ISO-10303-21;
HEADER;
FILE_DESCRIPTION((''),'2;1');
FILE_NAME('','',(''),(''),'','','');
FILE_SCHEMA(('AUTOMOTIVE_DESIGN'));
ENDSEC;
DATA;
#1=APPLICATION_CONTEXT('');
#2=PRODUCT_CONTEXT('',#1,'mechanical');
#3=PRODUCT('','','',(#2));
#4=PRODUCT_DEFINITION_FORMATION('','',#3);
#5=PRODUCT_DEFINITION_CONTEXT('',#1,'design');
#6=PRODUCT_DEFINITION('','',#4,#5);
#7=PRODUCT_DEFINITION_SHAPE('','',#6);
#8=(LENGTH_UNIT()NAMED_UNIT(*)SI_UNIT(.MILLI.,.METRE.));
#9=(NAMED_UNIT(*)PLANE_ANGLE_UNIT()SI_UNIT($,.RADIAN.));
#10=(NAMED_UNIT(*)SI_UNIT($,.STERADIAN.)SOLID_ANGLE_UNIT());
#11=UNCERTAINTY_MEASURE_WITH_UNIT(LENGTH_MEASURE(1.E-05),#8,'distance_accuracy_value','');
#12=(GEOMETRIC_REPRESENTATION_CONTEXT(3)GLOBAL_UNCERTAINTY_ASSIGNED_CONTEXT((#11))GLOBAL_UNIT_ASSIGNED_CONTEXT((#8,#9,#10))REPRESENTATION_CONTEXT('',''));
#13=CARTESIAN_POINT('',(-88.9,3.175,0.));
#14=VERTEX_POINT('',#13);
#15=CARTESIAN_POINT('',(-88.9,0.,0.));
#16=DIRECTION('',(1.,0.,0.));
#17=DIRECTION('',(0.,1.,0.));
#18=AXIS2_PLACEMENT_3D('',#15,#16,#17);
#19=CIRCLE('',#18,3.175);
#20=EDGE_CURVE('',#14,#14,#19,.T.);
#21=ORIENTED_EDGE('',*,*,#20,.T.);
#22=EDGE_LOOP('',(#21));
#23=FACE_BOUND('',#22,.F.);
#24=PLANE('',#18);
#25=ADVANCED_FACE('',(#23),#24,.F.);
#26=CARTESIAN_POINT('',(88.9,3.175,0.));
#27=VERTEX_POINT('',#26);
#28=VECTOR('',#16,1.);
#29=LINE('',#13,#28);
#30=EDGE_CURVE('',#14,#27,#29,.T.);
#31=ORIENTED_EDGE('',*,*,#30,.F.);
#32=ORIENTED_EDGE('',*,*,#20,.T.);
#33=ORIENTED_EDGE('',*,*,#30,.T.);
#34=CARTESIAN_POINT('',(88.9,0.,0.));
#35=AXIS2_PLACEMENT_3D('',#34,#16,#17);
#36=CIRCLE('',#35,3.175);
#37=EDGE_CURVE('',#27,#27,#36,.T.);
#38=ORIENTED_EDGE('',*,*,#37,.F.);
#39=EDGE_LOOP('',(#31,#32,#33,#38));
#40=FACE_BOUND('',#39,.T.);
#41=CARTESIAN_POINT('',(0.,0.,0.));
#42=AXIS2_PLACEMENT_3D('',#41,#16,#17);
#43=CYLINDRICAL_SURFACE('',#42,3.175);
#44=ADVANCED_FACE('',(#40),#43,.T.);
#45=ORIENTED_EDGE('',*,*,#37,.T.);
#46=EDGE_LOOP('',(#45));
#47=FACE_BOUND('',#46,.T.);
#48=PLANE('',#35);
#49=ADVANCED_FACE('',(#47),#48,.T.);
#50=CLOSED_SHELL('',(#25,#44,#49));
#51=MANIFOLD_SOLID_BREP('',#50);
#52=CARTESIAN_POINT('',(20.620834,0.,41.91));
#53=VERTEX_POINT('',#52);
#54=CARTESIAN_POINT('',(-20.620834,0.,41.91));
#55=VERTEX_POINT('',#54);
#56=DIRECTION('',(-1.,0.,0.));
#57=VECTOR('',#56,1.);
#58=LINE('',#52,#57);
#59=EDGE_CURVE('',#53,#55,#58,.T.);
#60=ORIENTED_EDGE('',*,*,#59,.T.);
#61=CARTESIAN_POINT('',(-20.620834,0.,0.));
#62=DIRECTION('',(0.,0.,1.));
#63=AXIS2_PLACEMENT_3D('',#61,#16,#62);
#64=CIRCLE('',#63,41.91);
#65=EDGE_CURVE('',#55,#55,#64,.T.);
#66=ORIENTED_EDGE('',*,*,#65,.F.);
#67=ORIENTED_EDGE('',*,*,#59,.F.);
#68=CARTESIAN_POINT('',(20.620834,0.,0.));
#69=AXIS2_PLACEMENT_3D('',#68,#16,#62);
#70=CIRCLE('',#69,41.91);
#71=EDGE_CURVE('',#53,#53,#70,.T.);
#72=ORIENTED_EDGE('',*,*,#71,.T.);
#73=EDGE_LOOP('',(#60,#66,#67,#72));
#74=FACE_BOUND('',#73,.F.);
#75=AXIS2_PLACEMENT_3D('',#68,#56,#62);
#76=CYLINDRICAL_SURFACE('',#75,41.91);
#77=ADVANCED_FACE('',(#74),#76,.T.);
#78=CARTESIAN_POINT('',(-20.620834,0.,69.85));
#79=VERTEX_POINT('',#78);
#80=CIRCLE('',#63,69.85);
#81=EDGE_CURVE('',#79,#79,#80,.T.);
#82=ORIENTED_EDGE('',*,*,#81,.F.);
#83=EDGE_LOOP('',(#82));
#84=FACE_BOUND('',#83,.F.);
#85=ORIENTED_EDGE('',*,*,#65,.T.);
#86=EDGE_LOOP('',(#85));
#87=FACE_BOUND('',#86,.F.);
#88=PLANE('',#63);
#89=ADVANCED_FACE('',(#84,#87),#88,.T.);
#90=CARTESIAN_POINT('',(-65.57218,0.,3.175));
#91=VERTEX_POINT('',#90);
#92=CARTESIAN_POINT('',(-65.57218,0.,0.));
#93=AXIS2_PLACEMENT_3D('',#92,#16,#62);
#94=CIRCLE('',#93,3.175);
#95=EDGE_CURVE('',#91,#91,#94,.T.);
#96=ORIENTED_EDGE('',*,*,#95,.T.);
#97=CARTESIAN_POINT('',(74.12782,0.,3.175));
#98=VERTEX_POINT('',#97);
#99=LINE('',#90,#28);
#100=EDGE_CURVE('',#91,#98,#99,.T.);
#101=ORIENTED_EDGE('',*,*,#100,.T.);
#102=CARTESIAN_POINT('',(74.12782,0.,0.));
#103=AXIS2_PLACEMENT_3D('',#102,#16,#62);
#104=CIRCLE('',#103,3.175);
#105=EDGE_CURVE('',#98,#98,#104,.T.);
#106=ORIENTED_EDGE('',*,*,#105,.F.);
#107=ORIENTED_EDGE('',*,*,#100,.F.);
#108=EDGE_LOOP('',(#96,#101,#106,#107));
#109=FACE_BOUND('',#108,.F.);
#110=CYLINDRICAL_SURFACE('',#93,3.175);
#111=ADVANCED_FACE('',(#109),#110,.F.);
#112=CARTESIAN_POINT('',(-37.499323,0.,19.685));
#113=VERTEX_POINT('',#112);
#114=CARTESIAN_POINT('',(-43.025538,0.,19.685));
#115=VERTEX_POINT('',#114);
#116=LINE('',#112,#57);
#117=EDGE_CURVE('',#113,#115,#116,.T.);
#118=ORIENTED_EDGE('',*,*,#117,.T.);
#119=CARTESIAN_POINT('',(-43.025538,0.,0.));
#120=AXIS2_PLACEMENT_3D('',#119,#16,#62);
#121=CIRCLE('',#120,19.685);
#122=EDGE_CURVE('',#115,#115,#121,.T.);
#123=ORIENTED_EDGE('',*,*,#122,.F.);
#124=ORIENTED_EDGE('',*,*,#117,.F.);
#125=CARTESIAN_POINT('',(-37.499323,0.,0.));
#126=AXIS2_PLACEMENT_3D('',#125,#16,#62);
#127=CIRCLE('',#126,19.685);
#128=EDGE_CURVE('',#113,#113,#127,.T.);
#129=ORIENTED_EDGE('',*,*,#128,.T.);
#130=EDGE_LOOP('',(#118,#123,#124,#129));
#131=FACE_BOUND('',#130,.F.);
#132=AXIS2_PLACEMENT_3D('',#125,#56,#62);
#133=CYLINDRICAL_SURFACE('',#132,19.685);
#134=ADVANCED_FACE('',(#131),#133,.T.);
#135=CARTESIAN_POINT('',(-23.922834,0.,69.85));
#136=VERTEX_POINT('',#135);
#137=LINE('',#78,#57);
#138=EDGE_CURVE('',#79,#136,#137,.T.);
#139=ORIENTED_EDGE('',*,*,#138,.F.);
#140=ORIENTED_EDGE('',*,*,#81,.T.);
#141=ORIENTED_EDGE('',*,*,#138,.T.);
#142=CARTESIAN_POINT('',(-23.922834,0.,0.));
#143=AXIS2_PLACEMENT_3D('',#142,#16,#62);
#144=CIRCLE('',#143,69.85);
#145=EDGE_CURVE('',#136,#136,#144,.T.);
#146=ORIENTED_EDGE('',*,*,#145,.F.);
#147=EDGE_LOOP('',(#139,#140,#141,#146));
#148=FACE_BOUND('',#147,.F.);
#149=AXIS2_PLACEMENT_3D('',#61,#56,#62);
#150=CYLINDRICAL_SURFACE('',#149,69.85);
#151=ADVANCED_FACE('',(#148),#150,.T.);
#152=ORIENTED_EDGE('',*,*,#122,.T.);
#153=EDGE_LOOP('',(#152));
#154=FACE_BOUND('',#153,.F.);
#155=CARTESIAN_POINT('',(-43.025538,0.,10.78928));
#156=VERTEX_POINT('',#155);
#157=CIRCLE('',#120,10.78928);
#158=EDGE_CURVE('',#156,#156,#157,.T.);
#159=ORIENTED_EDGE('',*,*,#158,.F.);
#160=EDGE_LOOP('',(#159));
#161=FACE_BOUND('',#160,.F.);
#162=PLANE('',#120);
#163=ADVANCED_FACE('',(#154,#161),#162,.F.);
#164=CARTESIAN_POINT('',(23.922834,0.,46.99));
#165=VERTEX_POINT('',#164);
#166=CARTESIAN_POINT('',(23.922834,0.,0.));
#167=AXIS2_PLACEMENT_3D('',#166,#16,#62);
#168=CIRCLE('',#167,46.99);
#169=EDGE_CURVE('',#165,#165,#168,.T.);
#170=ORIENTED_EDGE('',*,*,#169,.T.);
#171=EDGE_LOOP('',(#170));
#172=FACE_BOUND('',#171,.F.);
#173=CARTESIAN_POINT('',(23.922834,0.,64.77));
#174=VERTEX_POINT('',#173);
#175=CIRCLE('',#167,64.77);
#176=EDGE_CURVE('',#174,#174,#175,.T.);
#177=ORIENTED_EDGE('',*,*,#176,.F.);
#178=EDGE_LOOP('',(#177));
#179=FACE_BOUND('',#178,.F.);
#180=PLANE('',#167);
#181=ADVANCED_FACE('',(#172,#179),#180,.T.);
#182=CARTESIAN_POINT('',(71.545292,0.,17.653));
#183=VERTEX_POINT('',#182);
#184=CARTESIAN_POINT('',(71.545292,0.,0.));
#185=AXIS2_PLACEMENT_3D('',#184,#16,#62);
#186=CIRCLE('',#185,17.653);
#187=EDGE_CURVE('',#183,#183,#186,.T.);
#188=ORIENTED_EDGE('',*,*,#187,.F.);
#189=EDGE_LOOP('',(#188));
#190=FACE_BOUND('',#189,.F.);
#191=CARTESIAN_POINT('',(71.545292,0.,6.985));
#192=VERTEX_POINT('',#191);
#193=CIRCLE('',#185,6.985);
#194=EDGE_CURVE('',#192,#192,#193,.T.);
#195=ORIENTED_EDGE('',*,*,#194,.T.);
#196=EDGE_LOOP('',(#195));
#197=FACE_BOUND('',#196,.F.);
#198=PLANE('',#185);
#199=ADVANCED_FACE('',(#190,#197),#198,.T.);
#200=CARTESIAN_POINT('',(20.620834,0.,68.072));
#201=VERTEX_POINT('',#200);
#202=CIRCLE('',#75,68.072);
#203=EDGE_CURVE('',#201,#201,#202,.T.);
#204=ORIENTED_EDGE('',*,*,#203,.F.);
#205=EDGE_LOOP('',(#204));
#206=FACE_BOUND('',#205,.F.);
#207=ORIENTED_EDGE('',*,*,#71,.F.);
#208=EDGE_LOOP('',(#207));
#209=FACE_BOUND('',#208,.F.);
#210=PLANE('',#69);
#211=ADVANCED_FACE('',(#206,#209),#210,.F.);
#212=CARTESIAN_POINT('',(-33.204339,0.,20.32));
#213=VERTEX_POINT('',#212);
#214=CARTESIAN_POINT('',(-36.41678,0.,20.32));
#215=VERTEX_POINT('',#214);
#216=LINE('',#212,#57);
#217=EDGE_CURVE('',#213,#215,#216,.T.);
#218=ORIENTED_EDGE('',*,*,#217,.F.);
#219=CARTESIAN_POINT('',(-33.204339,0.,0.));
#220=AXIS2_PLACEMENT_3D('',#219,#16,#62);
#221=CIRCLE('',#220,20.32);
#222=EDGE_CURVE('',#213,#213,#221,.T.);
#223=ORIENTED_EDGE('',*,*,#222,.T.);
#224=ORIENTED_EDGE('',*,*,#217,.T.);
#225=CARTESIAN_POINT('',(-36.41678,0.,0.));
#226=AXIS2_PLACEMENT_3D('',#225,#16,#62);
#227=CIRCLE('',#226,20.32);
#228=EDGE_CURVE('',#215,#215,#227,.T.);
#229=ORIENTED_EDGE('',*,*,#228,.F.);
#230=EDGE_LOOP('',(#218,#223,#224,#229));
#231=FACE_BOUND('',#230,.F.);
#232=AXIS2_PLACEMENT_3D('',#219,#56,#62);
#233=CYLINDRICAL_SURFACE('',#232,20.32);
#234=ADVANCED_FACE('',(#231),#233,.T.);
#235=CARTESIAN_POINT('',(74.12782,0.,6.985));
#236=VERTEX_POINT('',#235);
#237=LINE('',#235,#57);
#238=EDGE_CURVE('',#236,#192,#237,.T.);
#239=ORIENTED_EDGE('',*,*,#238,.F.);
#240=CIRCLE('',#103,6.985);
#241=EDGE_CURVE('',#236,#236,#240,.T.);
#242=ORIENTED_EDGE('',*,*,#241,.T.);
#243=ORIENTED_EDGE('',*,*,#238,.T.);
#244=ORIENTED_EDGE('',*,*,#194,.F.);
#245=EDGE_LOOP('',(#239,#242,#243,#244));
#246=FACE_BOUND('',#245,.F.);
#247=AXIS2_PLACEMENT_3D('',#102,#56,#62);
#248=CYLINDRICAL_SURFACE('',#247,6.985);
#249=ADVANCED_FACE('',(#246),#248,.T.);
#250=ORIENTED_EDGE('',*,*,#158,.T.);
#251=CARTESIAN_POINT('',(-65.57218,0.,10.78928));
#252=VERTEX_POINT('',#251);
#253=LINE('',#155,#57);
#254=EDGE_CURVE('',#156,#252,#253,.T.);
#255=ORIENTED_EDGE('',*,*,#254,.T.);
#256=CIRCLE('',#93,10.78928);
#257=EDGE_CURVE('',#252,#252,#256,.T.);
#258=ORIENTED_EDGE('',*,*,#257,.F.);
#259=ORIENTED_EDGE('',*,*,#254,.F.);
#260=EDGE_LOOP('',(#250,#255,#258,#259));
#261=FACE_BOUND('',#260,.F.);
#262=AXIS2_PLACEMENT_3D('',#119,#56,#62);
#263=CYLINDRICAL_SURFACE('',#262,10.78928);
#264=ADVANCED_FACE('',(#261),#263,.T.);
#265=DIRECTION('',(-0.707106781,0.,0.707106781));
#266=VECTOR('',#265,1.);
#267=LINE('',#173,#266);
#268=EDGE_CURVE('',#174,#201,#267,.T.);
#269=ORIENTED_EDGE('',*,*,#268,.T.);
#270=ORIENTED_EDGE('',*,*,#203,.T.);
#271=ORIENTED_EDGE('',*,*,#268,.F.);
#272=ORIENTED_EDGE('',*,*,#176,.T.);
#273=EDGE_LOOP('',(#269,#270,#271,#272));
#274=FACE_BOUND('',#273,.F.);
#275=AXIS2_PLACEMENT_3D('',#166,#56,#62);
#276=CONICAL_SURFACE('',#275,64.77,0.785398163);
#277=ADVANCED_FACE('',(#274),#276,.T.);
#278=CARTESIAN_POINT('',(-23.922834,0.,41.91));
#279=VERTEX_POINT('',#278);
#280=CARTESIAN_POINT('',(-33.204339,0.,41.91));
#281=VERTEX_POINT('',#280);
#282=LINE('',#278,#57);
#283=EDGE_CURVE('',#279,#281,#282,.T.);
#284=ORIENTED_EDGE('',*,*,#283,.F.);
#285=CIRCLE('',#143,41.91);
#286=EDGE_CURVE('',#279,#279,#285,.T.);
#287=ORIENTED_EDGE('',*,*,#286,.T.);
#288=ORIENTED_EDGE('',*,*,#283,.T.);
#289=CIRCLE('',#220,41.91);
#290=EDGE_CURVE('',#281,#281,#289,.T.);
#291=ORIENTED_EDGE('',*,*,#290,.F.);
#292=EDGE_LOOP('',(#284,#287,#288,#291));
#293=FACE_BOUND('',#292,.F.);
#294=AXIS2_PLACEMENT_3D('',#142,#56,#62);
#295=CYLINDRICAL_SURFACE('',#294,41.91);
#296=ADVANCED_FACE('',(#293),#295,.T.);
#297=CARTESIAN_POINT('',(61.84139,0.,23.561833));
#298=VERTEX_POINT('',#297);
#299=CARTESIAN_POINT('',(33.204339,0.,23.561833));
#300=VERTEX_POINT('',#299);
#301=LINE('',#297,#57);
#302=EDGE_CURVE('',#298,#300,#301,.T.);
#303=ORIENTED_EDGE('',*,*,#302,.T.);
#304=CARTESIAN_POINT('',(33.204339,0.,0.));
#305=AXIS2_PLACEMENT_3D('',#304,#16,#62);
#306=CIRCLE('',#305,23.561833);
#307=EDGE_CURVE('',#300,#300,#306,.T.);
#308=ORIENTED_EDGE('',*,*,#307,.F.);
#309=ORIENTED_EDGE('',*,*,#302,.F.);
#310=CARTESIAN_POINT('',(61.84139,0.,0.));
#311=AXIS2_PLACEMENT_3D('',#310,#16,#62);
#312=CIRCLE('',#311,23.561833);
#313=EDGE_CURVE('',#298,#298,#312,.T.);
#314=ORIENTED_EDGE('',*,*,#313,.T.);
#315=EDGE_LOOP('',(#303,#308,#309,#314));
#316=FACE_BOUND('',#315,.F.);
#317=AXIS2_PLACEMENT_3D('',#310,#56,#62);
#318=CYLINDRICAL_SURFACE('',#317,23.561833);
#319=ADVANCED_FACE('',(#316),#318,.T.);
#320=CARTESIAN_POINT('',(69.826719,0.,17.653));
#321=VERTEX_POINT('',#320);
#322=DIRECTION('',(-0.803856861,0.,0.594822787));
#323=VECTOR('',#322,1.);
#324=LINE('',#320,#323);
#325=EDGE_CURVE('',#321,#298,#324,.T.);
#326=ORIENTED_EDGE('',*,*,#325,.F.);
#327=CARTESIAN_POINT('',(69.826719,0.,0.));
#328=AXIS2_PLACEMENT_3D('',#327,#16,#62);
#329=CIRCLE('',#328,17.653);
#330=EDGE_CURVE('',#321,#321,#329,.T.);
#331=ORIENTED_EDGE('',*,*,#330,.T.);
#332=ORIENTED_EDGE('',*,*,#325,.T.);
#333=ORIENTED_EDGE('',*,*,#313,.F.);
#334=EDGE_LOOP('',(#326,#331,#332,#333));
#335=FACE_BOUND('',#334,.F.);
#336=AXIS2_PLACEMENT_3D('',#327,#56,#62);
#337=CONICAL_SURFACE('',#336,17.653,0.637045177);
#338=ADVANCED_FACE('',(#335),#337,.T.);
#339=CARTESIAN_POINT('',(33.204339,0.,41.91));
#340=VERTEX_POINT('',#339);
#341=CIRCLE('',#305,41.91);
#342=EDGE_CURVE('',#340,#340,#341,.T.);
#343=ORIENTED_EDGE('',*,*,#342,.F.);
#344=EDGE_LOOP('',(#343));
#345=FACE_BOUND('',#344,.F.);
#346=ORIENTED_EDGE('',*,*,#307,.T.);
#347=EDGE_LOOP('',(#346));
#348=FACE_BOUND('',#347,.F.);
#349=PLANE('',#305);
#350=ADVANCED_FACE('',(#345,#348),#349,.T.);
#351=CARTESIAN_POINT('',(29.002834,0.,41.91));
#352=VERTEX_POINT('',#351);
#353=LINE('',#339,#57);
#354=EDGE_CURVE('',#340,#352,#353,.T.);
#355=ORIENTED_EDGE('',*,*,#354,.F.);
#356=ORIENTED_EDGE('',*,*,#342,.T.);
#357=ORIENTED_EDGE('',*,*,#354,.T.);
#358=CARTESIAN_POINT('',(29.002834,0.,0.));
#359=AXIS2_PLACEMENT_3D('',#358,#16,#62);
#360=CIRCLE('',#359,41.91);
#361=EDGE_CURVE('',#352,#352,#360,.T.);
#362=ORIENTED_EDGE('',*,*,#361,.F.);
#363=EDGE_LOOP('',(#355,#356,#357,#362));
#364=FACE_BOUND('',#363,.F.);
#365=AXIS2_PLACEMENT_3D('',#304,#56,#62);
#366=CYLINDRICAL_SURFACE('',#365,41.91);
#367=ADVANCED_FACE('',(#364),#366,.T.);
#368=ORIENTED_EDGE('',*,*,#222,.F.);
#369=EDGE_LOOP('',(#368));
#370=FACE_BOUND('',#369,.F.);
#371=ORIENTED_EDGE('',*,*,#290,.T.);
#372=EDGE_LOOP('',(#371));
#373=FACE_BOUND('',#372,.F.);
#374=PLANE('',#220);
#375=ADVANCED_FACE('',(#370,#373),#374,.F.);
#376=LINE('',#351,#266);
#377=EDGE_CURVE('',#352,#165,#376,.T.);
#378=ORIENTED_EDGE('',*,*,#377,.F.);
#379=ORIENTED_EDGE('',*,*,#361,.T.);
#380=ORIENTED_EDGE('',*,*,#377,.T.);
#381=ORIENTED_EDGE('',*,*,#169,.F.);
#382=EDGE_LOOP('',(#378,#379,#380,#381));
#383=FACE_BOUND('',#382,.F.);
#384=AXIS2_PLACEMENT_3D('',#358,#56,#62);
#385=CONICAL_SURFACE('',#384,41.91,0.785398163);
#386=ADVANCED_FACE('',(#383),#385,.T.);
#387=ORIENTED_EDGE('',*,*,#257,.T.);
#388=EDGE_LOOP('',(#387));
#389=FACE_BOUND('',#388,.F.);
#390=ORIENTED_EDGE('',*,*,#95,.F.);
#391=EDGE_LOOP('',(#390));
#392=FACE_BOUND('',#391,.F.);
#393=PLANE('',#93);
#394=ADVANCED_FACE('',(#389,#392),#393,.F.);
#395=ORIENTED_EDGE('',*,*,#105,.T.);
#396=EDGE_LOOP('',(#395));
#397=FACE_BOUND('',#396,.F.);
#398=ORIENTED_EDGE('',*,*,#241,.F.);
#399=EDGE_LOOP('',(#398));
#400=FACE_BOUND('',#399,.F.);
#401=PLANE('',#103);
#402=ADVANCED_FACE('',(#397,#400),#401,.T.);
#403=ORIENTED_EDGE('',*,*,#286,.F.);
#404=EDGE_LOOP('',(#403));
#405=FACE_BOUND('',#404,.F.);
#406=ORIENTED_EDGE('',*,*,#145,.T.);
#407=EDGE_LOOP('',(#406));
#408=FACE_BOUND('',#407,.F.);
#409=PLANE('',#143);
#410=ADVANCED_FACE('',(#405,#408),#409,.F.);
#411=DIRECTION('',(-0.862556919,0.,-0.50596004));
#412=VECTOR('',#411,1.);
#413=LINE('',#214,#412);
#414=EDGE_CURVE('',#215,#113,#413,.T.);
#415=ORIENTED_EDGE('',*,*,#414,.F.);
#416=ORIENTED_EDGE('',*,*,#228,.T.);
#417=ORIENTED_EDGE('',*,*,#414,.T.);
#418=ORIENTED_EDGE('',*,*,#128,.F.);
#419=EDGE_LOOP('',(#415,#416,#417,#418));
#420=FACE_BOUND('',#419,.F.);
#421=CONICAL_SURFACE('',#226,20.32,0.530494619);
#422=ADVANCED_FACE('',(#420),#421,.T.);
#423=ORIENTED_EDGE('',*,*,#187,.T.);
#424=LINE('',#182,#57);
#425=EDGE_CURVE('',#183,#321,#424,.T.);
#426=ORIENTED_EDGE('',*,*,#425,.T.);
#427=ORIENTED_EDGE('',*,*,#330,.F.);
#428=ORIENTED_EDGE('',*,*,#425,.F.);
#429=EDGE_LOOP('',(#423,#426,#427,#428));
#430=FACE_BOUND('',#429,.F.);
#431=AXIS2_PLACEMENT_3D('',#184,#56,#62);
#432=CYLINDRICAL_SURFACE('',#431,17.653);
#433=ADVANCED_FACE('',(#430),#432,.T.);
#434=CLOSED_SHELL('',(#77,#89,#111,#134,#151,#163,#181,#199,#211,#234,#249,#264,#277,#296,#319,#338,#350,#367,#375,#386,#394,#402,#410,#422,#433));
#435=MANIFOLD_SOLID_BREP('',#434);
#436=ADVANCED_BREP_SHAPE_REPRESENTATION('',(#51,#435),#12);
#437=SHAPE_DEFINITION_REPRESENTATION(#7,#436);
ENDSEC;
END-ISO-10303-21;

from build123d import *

# Parameters (mm, degrees)
F0_R     = 3.175
F1_DEPTH = 88.9


# Not quite as in the source:
# - a fillet or chamfer that OpenCascade refuses, or shapes differently, is made with other operations: its cross-section is extruded or revolved along the edge and cut away or added


with BuildPart() as f1:
    # F0 (on Right) → F1 (new body, symmetric)
    with BuildSketch(Plane.YZ):
        Circle(F0_R)
    extrude(amount=F1_DEPTH, both=True)


with BuildPart() as f3:
    # F2 (on Front) → F3 (revolve)
    with BuildSketch(Plane.XZ):
        Polygon((-65.5721798539, 10.789279826), (-65.5721798539, 3.175), (74.1278201461, 3.175), (74.1278201461, 6.985), (71.5452923138, 6.985), (71.5452923138, 17.653), (69.8267191484, 17.653), (61.8413901258, 23.561832648), (33.2043394446, 23.561832648), (33.2043394446, 41.91), (23.9228336141, 41.91), (23.9228336141, 69.85), (20.6208336141, 69.85), (20.6208336141, 41.91), (-20.6208336141, 41.91), (-20.6208336141, 69.85), (-23.9228336141, 69.85), (-23.9228336141, 41.91), (-33.2043394446, 41.91), (-33.2043394446, 20.32), (-36.4167802036, 20.32), (-37.4993234873, 19.685), (-43.0255383253, 19.685), (-43.0255383253, 10.789279826), align=None)
    revolve(axis=Axis((54.40691486, 0, 0), (1, 0, 0)))

    # F5: chamfer of 5.08 on 2 edges, made by hand

    # F5_s1 → F5_t2 (revolve)
    with BuildSketch(Plane.XZ):
        Polygon((29.0028336141, 41.91), (23.9228336141, 46.99), (23.9228336141, 41.91), align=None)
    revolve(axis=Axis((23.9228336141, 0, 0), (1, 0, 0)))

    # F5_s3 → F5_t4 (revolve, cut)
    with BuildSketch(Plane.XZ):
        Polygon((23.9228336141, 64.77), (18.8428336141, 69.85), (23.9228336141, 69.85), align=None)
    revolve(axis=Axis((23.9228336141, 0, 0), (1, 0, 0)), mode=Mode.SUBTRACT)


solid = Compound([f1.part, f3.part])
